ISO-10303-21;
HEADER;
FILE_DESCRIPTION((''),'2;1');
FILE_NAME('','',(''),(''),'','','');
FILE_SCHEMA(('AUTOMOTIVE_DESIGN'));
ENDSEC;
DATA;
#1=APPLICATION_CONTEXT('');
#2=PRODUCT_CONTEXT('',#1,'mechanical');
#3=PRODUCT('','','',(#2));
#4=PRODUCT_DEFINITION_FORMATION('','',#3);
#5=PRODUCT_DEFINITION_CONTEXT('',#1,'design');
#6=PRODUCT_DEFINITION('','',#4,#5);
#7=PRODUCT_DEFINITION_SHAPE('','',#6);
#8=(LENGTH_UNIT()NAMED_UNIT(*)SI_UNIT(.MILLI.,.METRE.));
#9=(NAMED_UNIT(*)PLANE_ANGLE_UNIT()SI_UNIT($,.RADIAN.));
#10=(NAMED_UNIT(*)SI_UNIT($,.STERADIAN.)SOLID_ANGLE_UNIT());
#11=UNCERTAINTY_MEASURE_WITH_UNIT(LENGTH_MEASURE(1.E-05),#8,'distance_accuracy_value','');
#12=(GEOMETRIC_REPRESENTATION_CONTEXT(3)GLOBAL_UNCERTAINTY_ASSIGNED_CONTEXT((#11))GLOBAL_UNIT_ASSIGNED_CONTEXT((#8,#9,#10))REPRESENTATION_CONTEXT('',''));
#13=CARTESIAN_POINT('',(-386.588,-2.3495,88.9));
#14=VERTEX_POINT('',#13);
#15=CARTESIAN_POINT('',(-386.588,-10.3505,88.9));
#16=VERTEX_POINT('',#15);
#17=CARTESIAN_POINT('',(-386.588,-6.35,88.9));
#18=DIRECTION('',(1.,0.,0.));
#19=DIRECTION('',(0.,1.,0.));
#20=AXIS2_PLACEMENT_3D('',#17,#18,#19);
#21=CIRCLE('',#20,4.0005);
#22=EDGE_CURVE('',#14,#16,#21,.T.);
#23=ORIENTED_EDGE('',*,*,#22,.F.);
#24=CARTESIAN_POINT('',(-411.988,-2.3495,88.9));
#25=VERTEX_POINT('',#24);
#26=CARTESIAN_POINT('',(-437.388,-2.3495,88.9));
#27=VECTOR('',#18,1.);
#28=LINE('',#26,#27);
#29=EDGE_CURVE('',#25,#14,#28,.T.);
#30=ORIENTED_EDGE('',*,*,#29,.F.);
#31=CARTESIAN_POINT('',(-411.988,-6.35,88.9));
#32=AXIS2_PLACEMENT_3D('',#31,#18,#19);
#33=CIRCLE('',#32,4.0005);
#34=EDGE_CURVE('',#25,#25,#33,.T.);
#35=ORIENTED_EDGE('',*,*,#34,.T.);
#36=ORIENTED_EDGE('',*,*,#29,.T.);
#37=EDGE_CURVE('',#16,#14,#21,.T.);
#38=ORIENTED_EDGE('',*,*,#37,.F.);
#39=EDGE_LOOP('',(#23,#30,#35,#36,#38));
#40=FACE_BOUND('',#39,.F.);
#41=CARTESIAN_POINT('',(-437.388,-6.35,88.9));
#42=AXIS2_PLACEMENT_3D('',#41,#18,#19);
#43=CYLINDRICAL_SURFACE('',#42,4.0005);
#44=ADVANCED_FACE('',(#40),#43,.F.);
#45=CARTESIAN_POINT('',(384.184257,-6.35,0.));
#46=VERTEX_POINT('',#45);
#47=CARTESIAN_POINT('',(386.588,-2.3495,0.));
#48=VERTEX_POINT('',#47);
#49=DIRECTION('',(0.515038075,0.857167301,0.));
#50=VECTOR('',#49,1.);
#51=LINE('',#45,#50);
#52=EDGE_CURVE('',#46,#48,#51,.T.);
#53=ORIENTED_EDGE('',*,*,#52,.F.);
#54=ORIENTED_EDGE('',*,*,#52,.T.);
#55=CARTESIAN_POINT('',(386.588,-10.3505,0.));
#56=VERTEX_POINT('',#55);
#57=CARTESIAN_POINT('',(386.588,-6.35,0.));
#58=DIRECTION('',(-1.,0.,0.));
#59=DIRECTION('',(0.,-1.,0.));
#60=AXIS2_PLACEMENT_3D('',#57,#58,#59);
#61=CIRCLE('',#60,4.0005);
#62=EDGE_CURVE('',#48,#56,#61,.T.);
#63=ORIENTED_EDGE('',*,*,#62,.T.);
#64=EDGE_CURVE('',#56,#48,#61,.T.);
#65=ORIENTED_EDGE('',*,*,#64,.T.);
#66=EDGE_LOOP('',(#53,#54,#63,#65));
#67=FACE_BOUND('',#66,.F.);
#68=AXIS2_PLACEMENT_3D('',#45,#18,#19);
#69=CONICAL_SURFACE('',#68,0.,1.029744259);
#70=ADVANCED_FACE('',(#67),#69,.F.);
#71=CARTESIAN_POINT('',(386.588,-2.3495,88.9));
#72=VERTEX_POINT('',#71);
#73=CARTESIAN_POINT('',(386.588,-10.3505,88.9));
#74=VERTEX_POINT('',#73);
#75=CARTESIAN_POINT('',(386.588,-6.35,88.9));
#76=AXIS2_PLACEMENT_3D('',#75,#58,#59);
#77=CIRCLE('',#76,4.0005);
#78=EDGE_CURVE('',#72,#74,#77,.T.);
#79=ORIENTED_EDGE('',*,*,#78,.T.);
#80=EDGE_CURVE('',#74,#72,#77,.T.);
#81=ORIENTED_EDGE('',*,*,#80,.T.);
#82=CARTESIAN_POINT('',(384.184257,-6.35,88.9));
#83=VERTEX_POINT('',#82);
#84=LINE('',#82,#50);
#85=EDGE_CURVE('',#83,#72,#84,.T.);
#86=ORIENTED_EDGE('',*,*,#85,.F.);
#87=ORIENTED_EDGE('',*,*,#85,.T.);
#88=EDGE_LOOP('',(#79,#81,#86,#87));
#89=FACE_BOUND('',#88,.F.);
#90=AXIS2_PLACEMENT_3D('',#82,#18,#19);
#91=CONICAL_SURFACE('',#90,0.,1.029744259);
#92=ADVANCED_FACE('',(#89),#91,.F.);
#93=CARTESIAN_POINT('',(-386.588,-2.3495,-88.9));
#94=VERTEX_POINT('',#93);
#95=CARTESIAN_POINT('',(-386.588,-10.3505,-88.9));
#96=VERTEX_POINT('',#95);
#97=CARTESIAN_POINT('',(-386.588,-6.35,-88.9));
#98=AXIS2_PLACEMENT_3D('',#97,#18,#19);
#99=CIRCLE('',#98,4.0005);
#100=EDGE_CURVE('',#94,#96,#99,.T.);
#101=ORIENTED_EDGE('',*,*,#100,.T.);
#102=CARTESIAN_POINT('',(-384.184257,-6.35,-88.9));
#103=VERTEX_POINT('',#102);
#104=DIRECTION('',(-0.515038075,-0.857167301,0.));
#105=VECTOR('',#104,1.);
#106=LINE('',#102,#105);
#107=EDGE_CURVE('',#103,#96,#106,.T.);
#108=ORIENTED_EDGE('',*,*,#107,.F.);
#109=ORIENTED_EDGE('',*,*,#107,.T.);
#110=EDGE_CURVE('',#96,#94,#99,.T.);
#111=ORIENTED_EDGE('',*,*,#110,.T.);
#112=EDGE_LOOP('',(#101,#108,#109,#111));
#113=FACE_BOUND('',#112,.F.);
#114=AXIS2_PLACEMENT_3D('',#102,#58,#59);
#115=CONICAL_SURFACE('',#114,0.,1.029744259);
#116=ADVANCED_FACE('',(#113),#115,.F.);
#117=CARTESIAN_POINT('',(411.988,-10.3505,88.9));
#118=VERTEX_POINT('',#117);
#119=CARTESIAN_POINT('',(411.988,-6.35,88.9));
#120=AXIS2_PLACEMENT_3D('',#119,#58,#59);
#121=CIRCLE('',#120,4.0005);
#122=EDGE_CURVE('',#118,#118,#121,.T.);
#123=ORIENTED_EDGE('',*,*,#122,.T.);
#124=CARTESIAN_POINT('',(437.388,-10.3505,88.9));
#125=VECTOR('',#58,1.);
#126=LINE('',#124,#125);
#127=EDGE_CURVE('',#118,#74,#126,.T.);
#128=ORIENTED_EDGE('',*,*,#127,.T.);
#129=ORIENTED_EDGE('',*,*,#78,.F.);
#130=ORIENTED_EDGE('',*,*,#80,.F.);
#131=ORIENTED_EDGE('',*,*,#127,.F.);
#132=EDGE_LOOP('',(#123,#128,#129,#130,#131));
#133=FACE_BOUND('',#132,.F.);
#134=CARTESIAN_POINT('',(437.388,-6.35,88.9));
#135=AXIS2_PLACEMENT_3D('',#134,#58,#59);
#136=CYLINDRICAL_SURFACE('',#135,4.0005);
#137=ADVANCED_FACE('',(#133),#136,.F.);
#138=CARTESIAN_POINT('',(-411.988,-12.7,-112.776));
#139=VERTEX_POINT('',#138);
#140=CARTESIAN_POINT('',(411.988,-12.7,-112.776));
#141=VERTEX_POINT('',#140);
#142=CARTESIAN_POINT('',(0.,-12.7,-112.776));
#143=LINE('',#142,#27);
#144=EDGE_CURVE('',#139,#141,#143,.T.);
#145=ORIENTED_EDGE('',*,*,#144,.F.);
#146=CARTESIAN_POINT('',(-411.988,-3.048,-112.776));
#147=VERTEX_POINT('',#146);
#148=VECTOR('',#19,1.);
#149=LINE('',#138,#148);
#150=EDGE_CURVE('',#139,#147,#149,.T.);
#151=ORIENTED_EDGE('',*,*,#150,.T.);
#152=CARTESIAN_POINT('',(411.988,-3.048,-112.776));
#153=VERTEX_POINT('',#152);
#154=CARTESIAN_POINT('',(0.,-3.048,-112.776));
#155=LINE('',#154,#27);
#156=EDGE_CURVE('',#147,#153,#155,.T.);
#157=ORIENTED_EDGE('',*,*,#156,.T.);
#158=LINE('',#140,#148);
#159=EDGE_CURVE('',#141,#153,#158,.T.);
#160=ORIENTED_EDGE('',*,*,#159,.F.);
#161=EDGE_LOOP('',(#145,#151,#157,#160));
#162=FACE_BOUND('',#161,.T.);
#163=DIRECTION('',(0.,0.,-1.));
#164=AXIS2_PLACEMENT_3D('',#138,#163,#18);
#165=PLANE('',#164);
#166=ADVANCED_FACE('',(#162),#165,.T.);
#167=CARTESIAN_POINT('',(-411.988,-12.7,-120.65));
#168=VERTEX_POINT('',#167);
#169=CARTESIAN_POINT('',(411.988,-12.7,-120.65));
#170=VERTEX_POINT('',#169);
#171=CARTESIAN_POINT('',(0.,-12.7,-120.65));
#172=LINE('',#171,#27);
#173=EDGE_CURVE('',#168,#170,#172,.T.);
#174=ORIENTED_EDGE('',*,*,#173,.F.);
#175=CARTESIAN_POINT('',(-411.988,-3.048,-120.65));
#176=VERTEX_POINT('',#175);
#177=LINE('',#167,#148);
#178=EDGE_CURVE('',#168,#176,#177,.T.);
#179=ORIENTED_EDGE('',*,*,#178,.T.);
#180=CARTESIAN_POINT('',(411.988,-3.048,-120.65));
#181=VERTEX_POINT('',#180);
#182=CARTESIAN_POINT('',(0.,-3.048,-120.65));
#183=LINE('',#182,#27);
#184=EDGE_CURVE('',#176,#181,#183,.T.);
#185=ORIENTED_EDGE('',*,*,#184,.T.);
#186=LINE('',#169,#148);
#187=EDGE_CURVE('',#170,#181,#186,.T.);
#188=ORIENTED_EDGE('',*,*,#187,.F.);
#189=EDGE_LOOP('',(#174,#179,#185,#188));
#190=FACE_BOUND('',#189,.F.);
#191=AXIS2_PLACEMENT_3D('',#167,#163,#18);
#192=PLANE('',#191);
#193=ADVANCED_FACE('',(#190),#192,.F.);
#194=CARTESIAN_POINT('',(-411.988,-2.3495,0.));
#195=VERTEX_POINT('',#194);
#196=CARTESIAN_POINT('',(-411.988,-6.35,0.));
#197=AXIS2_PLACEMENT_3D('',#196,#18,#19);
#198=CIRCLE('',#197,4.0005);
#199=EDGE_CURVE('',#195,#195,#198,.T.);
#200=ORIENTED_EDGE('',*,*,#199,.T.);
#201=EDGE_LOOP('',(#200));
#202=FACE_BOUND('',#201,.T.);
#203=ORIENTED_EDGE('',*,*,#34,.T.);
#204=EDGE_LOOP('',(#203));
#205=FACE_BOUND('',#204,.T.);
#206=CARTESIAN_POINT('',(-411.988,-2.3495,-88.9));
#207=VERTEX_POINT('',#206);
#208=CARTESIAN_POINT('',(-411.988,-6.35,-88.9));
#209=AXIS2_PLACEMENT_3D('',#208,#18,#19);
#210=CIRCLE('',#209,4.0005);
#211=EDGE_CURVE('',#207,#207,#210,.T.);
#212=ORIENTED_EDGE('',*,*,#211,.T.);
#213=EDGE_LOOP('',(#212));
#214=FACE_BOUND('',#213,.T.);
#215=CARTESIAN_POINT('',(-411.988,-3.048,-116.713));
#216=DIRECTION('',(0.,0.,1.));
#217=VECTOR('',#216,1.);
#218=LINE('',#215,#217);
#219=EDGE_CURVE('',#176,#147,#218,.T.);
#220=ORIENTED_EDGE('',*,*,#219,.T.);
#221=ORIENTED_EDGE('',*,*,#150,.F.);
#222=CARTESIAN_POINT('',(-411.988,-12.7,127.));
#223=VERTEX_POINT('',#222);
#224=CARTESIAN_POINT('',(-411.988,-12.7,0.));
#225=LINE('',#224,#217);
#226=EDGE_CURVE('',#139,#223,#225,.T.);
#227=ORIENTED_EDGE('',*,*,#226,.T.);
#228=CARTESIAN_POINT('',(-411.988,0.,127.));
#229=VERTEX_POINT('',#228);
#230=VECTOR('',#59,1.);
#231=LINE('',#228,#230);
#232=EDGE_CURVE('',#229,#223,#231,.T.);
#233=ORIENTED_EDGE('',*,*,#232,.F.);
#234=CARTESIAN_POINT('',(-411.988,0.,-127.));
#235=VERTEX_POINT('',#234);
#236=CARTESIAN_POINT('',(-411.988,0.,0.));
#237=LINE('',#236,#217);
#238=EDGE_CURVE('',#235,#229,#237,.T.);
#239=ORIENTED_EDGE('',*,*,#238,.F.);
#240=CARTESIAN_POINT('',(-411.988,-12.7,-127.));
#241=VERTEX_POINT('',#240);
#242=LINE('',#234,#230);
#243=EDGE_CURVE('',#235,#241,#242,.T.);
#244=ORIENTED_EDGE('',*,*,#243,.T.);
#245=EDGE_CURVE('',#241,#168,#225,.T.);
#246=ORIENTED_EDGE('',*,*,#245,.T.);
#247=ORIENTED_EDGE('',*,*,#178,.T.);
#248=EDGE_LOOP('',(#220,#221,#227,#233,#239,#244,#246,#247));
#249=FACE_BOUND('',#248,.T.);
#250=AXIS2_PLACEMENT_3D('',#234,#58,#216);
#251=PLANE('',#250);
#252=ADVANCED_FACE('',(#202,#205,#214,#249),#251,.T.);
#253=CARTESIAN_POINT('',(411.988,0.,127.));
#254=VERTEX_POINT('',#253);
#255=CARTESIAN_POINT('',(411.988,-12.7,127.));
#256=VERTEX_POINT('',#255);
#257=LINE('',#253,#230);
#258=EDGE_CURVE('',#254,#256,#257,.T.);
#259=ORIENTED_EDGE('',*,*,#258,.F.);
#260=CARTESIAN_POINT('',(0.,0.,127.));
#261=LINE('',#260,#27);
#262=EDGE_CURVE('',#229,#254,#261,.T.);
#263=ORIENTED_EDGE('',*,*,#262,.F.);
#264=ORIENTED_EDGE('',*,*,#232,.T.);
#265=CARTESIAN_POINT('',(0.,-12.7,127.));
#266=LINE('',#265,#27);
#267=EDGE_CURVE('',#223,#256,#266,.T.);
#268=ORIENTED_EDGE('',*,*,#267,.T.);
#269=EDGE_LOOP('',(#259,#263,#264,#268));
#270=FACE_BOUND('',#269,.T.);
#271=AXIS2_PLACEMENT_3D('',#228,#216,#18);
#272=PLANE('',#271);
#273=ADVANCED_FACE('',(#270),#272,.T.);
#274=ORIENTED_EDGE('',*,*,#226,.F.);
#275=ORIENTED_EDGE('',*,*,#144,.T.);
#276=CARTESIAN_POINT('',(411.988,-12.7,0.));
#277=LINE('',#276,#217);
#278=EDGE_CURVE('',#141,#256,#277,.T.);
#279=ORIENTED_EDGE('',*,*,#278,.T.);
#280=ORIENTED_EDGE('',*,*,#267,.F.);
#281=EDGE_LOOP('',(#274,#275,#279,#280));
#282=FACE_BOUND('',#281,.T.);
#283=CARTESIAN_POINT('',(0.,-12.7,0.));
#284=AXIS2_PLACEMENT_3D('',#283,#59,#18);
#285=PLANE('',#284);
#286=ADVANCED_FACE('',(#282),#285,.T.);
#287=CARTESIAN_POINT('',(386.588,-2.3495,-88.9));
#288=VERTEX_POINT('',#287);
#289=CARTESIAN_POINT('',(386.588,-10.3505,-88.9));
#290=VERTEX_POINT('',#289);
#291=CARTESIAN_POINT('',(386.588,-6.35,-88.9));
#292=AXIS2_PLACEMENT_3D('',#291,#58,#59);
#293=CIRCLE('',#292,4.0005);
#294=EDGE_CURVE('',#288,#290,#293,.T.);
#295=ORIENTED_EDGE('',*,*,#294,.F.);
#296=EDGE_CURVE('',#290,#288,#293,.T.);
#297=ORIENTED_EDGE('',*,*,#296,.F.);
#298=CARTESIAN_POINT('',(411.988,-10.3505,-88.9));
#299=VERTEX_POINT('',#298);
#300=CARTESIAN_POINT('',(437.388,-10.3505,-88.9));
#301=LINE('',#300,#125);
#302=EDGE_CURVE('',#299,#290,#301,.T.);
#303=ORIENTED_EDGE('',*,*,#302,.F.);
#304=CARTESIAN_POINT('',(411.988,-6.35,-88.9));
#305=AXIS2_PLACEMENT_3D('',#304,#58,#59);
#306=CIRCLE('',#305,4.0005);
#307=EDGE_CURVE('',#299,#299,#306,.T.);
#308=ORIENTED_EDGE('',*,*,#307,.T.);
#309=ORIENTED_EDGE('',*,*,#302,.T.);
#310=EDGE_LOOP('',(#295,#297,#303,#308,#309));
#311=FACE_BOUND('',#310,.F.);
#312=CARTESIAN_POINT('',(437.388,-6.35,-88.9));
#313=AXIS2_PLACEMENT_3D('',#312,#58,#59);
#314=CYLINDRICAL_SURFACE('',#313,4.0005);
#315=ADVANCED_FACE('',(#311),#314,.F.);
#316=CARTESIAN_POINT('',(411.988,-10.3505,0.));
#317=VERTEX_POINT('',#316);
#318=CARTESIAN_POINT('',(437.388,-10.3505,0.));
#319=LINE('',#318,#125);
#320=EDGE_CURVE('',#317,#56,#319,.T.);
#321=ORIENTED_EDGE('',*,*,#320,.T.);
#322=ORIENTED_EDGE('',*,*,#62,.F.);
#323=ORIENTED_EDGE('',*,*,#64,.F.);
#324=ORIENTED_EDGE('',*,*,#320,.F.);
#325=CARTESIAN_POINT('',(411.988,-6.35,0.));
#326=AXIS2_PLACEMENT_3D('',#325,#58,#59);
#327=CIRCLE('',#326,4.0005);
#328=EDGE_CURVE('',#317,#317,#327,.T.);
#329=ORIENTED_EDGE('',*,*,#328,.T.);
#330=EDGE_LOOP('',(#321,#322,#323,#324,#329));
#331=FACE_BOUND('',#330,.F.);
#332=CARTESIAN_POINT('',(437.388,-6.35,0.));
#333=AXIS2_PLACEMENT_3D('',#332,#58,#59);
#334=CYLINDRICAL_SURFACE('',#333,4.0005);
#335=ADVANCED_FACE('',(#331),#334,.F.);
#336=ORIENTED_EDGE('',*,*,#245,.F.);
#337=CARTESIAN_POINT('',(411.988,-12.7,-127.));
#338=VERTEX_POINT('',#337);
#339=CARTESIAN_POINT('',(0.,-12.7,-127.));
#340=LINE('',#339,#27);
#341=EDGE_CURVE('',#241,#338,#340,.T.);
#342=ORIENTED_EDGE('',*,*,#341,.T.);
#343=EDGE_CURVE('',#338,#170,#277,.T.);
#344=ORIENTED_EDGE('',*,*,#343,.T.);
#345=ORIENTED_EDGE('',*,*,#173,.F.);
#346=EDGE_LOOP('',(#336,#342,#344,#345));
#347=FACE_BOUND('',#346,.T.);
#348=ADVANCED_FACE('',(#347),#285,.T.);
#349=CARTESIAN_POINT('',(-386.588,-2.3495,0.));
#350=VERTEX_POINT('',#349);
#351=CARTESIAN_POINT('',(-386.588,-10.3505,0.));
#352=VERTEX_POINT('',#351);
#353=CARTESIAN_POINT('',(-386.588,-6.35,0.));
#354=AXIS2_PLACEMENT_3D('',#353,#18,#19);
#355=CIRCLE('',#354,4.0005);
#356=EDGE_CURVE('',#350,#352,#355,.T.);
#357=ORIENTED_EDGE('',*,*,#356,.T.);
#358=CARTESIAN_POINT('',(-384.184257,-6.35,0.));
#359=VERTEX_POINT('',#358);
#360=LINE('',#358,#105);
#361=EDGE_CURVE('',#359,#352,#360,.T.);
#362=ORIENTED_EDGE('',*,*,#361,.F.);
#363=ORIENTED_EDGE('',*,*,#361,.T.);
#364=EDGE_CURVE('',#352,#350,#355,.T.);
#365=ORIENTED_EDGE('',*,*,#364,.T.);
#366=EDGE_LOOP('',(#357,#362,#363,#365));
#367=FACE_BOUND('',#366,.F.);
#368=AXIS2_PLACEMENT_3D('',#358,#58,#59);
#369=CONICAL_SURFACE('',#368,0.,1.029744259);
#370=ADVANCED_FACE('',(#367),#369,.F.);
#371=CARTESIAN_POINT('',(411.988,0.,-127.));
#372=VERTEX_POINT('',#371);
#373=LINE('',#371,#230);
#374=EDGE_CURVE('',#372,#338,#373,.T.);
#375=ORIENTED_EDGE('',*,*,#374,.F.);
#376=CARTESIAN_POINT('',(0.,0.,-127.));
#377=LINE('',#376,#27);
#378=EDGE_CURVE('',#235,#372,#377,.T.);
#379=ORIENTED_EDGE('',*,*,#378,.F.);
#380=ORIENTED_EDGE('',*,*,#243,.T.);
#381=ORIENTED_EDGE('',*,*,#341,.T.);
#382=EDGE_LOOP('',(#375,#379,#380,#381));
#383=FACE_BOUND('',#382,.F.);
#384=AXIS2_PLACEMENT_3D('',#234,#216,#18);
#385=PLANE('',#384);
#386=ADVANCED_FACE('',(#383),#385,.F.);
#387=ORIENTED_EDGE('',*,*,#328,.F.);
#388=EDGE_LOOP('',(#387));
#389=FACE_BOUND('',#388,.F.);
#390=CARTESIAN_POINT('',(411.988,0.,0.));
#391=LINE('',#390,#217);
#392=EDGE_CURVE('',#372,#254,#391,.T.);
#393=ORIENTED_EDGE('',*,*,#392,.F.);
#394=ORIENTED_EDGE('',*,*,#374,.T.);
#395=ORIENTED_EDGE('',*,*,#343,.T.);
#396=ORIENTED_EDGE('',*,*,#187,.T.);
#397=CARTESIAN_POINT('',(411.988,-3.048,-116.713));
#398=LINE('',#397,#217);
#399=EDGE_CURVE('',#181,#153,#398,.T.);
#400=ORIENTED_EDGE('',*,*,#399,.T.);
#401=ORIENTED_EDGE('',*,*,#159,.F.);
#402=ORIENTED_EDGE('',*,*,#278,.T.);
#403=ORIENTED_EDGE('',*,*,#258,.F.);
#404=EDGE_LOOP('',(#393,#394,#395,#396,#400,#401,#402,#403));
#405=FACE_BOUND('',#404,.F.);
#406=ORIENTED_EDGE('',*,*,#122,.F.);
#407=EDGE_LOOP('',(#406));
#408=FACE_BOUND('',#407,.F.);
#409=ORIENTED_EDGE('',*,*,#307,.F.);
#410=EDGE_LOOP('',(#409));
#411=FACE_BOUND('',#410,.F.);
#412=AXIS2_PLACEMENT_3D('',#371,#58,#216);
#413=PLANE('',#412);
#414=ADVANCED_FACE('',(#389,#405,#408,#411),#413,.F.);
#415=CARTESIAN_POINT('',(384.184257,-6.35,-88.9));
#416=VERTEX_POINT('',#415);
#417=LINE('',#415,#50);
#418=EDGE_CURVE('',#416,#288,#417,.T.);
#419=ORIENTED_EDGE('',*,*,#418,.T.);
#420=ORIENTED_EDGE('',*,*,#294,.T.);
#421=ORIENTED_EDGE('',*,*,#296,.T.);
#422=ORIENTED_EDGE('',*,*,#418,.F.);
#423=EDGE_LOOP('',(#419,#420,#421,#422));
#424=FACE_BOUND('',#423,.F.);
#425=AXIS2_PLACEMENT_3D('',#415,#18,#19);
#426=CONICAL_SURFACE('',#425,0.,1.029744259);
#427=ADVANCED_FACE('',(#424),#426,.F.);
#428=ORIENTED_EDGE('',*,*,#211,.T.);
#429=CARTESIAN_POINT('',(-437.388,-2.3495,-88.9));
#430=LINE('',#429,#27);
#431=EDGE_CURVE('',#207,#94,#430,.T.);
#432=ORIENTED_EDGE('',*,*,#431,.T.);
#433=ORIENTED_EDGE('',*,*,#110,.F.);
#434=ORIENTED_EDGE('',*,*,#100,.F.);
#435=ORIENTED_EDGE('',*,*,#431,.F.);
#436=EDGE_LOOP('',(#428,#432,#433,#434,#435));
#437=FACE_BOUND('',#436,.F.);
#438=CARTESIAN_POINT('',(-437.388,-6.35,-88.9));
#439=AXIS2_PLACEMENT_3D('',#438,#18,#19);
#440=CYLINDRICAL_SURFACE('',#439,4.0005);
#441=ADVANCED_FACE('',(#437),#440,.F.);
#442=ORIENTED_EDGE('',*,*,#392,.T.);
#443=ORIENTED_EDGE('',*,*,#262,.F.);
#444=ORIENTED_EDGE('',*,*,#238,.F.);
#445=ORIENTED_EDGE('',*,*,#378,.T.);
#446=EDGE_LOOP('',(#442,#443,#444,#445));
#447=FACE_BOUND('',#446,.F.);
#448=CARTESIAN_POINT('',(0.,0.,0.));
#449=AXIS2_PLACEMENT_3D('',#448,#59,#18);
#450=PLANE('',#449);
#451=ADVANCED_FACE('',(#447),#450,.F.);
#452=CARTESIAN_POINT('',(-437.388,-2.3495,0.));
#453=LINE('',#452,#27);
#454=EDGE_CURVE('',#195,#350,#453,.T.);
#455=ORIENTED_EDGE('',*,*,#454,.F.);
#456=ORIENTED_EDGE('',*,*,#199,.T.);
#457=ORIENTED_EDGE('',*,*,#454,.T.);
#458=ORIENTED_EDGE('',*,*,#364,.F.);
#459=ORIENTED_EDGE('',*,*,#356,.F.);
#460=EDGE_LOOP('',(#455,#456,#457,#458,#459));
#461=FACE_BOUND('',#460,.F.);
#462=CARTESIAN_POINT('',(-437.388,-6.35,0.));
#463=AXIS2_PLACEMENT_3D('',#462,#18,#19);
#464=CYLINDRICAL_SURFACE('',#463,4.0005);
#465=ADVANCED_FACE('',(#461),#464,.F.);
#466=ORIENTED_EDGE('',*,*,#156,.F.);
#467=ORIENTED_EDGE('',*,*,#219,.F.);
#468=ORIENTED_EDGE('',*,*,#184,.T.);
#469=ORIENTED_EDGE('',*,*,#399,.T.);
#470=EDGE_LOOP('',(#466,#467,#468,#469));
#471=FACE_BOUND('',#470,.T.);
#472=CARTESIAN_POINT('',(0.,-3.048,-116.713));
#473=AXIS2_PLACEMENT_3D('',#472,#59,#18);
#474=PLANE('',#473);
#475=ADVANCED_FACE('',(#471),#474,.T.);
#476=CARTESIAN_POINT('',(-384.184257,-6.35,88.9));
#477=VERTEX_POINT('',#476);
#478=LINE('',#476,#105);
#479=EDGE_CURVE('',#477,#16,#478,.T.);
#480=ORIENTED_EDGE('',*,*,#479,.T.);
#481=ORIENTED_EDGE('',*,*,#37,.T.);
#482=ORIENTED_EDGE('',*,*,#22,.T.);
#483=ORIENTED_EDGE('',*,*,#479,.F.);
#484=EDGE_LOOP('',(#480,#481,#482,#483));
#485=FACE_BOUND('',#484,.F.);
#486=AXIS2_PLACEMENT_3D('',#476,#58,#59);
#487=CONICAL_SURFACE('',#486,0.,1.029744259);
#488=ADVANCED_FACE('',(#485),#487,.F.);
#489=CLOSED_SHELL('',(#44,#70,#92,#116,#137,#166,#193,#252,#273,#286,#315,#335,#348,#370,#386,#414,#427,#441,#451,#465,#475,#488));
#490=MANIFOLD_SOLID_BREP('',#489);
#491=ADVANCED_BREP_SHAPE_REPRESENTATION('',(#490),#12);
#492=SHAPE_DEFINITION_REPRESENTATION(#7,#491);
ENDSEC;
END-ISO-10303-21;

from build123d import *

# Parameters (mm, degrees)
F0_W     = 823.976
F0_H     = 254
F1_DEPTH = 12.7
F2_W     = 823.976
F2_H     = 7.874
F3_DEPTH = 9.652
F5_D     = 8.001
F5_DEPTH = 25.4
F5_TIP   = 2.4037429064
F7_D     = 8.001
F7_DEPTH = 25.4
F7_TIP   = 2.4037429064


with BuildPart() as f1:
    # F0 (on Front) → F1 (new body)
    with BuildSketch(Plane.XZ):
        Rectangle(F0_W, F0_H)
    extrude(amount=F1_DEPTH)

    # F2 (on face) → F3 (cut)
    with BuildSketch(Plane.XZ.offset(12.7)):
        with Locations((0, -116.713)):
            Rectangle(F2_W, F2_H)
    extrude(amount=-F3_DEPTH, mode=Mode.SUBTRACT)

    # F5
    with Locations(Plane(origin=(-411.988, 0, 0), x_dir=(0, -1, 0), z_dir=(-1, 0, 0))):
        with Locations((6.35, 88.9), (6.35, 0), (6.35, -88.9)):
            Hole(F5_D / 2, depth=F5_DEPTH)
            with Locations((0, 0, -(F5_DEPTH + F5_TIP / 2))):  # 118° drill point
                Cone(0, F5_D / 2, F5_TIP, mode=Mode.SUBTRACT)

    # F7
    with Locations(Plane.YZ.offset(411.988)):
        with Locations((-6.35, 88.9), (-6.35, 0), (-6.35, -88.9)):
            Hole(F7_D / 2, depth=F7_DEPTH)
            with Locations((0, 0, -(F7_DEPTH + F7_TIP / 2))):  # 118° drill point
                Cone(0, F7_D / 2, F7_TIP, mode=Mode.SUBTRACT)


solid = f1.part
